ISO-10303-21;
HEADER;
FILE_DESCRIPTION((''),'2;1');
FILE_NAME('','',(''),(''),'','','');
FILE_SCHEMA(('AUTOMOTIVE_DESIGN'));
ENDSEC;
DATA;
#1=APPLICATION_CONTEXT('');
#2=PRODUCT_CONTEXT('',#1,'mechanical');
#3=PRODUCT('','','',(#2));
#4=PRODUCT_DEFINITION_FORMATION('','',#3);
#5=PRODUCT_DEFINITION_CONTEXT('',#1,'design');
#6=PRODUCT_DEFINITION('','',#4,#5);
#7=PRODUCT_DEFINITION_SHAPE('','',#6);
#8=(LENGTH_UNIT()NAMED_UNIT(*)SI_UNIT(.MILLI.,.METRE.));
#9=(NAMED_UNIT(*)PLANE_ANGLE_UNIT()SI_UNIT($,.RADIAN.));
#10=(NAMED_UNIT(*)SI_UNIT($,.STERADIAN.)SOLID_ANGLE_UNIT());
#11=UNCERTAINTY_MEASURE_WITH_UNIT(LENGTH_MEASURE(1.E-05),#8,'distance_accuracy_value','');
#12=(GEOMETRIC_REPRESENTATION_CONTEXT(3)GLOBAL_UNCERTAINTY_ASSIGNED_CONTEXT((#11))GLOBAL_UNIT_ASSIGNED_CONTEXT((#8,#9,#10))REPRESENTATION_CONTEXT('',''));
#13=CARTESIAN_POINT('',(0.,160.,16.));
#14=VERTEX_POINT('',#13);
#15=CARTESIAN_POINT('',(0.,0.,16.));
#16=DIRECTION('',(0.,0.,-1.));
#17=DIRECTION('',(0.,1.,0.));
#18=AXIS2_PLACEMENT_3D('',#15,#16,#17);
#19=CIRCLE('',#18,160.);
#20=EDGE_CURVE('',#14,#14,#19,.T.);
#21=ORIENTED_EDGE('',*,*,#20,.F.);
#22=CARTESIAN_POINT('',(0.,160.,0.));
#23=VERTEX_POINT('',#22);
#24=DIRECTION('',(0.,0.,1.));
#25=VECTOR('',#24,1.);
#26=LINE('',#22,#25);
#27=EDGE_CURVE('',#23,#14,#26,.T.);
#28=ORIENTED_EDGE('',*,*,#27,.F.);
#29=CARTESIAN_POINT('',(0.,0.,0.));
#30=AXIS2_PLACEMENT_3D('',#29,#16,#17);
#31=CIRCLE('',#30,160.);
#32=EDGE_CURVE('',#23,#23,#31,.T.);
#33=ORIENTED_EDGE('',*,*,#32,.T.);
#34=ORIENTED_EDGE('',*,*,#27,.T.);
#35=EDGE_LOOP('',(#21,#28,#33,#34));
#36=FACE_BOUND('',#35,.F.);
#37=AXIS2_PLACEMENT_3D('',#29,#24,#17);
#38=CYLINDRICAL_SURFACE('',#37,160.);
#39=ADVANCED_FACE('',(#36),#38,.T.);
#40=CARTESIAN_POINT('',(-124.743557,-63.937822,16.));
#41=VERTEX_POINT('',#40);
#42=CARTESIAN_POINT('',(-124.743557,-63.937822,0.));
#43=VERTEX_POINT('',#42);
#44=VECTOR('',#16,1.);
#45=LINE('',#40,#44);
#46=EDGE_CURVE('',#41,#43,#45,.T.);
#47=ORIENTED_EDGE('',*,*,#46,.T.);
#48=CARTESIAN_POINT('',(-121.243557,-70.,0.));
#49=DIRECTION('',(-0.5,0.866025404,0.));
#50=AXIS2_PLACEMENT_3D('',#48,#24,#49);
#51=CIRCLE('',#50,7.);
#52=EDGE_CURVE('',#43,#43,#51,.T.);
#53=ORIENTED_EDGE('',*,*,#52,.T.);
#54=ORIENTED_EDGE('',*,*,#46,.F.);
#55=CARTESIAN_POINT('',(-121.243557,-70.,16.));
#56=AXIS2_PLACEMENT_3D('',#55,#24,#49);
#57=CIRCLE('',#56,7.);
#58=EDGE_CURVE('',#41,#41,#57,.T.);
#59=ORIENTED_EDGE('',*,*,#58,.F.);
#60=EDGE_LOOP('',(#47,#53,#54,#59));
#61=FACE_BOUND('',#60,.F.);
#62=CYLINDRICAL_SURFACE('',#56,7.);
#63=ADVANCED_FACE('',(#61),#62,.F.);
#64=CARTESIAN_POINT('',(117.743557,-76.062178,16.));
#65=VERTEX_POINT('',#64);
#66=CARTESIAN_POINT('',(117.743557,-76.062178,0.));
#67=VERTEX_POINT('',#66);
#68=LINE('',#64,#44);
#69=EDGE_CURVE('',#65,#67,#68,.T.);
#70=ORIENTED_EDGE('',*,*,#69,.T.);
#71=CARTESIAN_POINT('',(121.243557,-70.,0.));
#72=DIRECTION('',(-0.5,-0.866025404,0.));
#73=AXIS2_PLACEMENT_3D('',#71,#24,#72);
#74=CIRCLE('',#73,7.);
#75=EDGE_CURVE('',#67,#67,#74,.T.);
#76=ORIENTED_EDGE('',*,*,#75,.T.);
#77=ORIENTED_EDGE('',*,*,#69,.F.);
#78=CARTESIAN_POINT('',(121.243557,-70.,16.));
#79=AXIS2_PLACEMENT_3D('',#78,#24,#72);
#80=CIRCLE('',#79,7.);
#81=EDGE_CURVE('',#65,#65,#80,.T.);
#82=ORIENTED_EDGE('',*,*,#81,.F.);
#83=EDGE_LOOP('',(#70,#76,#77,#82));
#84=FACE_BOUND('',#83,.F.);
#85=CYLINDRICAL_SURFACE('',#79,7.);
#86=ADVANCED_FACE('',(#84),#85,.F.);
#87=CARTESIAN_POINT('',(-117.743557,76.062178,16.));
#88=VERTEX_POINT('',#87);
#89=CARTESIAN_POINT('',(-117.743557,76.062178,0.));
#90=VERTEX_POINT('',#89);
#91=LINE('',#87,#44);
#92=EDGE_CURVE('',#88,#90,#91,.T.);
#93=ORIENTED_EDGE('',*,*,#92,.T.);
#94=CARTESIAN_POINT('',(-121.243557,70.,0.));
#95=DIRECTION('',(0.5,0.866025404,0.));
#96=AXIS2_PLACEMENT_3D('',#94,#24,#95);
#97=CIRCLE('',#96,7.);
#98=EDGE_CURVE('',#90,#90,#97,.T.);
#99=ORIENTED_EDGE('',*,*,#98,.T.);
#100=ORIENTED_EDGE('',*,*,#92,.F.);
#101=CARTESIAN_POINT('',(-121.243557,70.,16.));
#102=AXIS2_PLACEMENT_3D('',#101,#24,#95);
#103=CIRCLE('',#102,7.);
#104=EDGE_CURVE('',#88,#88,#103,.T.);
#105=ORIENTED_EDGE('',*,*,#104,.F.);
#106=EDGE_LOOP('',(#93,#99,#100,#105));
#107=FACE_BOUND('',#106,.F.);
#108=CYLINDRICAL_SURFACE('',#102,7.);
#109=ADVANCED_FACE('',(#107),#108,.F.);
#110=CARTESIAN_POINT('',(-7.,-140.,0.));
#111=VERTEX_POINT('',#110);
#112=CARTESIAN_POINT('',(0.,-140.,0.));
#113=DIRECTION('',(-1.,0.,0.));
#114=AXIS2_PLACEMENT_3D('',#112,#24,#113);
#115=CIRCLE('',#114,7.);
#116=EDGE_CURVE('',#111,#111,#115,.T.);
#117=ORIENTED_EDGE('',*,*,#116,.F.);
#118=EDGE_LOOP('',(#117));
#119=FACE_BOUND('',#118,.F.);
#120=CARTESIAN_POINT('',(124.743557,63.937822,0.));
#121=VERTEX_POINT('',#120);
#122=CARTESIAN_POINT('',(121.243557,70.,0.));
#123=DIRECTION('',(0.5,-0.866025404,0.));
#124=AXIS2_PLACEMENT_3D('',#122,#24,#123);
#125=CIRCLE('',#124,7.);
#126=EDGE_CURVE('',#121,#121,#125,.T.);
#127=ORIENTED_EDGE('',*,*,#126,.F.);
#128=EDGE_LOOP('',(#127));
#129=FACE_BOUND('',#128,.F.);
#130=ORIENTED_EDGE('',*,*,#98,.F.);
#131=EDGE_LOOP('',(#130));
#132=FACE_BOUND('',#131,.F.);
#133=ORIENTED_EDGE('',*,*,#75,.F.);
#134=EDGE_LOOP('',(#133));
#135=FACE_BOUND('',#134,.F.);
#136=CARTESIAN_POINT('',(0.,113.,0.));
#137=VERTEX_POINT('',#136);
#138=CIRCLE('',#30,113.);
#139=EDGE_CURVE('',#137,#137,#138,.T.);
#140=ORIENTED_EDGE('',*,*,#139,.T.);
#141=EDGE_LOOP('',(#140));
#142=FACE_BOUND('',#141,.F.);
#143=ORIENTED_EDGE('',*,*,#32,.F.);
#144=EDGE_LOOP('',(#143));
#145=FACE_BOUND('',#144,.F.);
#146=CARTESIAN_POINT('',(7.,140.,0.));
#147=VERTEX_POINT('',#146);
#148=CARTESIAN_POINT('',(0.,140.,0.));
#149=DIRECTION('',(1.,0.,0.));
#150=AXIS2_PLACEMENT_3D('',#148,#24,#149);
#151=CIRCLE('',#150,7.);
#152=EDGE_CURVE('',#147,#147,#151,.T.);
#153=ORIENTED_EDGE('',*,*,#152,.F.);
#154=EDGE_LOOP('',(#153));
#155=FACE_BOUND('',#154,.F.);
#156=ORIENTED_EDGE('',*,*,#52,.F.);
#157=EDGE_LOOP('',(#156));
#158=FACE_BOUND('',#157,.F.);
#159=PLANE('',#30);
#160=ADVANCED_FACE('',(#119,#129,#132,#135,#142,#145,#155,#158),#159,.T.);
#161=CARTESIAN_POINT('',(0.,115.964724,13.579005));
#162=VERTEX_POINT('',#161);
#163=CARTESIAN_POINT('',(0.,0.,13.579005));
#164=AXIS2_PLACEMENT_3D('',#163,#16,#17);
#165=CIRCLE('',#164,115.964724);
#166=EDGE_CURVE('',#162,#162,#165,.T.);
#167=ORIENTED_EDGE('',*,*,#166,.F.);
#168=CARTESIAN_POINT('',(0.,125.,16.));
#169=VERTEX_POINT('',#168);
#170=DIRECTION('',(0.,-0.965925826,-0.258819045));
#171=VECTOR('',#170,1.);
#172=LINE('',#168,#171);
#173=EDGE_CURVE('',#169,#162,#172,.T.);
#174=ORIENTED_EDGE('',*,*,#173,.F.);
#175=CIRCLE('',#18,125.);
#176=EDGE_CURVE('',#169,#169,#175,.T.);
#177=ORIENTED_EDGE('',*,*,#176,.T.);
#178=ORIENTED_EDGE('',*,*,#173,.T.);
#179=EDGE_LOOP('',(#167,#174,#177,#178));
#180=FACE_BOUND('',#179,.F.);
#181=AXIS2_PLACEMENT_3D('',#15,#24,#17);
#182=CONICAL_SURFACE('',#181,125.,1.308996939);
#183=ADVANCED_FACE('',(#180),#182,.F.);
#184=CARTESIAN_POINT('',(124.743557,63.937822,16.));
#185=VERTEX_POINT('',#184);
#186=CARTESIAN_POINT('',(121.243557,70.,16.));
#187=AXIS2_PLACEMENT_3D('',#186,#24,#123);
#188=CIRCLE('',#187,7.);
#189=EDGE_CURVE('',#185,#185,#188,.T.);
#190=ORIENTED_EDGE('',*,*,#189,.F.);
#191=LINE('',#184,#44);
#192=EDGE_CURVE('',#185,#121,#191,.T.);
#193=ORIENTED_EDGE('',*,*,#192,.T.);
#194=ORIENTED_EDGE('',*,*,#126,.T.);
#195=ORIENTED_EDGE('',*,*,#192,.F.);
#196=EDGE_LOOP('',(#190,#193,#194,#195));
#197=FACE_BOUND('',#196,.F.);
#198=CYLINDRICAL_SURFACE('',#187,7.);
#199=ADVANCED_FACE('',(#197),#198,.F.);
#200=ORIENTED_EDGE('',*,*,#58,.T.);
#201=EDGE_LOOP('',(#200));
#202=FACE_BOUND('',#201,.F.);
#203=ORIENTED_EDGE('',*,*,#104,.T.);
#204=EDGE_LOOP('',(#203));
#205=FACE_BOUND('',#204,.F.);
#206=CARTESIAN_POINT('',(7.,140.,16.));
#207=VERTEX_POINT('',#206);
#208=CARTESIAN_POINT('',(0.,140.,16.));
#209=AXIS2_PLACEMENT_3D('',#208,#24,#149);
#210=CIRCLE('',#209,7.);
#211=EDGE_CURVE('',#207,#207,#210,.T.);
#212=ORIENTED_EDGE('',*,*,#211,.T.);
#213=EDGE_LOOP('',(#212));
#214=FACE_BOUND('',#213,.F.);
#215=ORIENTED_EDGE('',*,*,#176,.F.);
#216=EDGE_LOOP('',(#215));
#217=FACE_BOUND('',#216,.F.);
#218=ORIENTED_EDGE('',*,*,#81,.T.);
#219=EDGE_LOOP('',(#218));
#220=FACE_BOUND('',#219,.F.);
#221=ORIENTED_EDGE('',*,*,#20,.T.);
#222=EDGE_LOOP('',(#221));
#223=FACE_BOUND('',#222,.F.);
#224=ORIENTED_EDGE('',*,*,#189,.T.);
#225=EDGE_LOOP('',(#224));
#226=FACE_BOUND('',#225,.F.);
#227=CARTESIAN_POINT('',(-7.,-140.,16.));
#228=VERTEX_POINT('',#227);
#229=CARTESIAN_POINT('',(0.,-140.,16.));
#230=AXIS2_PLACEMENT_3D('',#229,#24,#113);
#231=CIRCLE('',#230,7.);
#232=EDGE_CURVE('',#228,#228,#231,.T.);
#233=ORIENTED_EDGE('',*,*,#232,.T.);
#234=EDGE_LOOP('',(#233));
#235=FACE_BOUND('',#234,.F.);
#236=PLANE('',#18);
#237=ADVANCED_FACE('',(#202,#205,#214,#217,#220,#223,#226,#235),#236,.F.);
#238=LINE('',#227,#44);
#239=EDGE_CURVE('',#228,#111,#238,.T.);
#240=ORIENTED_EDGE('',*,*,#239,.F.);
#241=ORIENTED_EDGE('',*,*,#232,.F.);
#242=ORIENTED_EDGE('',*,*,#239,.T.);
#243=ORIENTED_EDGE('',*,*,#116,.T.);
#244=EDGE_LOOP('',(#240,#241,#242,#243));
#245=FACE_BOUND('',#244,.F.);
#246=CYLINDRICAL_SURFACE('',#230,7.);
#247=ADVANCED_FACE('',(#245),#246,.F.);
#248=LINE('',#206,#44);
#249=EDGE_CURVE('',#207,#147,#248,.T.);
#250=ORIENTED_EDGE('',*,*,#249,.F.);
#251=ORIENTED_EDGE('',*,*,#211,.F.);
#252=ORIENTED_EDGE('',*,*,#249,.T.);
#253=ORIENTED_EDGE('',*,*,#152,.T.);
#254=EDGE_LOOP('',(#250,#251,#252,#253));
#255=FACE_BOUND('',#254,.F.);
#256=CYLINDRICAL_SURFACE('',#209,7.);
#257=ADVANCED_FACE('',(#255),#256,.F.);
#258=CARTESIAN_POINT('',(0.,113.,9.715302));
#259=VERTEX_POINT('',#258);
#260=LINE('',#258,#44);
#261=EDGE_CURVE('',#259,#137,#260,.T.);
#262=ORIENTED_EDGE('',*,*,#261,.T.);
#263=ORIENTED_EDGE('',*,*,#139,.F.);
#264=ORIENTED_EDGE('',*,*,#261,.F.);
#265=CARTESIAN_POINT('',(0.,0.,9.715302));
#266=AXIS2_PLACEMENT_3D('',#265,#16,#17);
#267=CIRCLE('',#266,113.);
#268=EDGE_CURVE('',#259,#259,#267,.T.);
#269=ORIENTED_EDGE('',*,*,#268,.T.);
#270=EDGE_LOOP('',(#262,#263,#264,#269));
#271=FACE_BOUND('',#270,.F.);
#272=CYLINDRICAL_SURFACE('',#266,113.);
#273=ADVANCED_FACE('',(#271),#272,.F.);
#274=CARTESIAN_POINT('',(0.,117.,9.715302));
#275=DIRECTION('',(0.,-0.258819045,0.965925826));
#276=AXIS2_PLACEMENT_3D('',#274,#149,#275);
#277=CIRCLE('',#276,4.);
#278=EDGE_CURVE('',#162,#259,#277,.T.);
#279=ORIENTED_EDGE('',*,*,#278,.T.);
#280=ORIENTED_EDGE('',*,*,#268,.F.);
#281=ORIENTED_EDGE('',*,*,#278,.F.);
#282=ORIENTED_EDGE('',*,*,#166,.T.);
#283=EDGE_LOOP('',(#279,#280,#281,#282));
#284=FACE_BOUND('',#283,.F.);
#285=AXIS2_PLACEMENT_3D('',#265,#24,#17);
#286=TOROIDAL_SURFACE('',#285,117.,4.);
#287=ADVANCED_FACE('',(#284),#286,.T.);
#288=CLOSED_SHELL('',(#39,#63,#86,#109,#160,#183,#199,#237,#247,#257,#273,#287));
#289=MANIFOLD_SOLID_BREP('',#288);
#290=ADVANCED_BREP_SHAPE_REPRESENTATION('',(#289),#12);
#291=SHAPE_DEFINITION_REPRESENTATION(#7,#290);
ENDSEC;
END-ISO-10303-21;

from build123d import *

# Parameters (mm, degrees)
F2_R            = 7
F3_DEPTH        = 25
F3_COPIES_COUNT = 6


# Not quite as in the source:
# - a pattern or mirror of a feature is missing from the dataset's text; its kind, count and spacing are read off the source's solid


with BuildPart() as f1:
    # F0 (on Right) → F1 (revolve)
    with BuildSketch(Plane.YZ):
        with BuildLine():
            Line((160, 16), (125, 16))
            Line((125, 16), (115.9647238196, 13.5790050441))
            ThreePointArc((115.9647238196, 13.5790050441), (113.8265866388, 12.1503474549), (113, 9.7153017389))
            Line((113, 9.7153017389), (113, 0))
            Line((113, 0), (160, 0))
            Line((160, 0), (160, 16))
        make_face()
    revolve(axis=Axis((0, 0, -1.8696532477), (0, 0, -1)))

    # F2 (on face) → F3 (cut)
    with BuildSketch(Plane.XY.offset(16)):
        with Locations((0, 140)):
            Circle(F2_R)
    f3 = extrude(amount=-F3_DEPTH, mode=Mode.SUBTRACT)

    # F3_copies: F3 ×6 about axis
    f3_copies_axis = Axis((0, 0, 0), (0, 0, 1))
    for i in range(1, F3_COPIES_COUNT):
        add(f3.rotate(f3_copies_axis, i * 360 / F3_COPIES_COUNT), mode=Mode.SUBTRACT)


solid = f1.part
